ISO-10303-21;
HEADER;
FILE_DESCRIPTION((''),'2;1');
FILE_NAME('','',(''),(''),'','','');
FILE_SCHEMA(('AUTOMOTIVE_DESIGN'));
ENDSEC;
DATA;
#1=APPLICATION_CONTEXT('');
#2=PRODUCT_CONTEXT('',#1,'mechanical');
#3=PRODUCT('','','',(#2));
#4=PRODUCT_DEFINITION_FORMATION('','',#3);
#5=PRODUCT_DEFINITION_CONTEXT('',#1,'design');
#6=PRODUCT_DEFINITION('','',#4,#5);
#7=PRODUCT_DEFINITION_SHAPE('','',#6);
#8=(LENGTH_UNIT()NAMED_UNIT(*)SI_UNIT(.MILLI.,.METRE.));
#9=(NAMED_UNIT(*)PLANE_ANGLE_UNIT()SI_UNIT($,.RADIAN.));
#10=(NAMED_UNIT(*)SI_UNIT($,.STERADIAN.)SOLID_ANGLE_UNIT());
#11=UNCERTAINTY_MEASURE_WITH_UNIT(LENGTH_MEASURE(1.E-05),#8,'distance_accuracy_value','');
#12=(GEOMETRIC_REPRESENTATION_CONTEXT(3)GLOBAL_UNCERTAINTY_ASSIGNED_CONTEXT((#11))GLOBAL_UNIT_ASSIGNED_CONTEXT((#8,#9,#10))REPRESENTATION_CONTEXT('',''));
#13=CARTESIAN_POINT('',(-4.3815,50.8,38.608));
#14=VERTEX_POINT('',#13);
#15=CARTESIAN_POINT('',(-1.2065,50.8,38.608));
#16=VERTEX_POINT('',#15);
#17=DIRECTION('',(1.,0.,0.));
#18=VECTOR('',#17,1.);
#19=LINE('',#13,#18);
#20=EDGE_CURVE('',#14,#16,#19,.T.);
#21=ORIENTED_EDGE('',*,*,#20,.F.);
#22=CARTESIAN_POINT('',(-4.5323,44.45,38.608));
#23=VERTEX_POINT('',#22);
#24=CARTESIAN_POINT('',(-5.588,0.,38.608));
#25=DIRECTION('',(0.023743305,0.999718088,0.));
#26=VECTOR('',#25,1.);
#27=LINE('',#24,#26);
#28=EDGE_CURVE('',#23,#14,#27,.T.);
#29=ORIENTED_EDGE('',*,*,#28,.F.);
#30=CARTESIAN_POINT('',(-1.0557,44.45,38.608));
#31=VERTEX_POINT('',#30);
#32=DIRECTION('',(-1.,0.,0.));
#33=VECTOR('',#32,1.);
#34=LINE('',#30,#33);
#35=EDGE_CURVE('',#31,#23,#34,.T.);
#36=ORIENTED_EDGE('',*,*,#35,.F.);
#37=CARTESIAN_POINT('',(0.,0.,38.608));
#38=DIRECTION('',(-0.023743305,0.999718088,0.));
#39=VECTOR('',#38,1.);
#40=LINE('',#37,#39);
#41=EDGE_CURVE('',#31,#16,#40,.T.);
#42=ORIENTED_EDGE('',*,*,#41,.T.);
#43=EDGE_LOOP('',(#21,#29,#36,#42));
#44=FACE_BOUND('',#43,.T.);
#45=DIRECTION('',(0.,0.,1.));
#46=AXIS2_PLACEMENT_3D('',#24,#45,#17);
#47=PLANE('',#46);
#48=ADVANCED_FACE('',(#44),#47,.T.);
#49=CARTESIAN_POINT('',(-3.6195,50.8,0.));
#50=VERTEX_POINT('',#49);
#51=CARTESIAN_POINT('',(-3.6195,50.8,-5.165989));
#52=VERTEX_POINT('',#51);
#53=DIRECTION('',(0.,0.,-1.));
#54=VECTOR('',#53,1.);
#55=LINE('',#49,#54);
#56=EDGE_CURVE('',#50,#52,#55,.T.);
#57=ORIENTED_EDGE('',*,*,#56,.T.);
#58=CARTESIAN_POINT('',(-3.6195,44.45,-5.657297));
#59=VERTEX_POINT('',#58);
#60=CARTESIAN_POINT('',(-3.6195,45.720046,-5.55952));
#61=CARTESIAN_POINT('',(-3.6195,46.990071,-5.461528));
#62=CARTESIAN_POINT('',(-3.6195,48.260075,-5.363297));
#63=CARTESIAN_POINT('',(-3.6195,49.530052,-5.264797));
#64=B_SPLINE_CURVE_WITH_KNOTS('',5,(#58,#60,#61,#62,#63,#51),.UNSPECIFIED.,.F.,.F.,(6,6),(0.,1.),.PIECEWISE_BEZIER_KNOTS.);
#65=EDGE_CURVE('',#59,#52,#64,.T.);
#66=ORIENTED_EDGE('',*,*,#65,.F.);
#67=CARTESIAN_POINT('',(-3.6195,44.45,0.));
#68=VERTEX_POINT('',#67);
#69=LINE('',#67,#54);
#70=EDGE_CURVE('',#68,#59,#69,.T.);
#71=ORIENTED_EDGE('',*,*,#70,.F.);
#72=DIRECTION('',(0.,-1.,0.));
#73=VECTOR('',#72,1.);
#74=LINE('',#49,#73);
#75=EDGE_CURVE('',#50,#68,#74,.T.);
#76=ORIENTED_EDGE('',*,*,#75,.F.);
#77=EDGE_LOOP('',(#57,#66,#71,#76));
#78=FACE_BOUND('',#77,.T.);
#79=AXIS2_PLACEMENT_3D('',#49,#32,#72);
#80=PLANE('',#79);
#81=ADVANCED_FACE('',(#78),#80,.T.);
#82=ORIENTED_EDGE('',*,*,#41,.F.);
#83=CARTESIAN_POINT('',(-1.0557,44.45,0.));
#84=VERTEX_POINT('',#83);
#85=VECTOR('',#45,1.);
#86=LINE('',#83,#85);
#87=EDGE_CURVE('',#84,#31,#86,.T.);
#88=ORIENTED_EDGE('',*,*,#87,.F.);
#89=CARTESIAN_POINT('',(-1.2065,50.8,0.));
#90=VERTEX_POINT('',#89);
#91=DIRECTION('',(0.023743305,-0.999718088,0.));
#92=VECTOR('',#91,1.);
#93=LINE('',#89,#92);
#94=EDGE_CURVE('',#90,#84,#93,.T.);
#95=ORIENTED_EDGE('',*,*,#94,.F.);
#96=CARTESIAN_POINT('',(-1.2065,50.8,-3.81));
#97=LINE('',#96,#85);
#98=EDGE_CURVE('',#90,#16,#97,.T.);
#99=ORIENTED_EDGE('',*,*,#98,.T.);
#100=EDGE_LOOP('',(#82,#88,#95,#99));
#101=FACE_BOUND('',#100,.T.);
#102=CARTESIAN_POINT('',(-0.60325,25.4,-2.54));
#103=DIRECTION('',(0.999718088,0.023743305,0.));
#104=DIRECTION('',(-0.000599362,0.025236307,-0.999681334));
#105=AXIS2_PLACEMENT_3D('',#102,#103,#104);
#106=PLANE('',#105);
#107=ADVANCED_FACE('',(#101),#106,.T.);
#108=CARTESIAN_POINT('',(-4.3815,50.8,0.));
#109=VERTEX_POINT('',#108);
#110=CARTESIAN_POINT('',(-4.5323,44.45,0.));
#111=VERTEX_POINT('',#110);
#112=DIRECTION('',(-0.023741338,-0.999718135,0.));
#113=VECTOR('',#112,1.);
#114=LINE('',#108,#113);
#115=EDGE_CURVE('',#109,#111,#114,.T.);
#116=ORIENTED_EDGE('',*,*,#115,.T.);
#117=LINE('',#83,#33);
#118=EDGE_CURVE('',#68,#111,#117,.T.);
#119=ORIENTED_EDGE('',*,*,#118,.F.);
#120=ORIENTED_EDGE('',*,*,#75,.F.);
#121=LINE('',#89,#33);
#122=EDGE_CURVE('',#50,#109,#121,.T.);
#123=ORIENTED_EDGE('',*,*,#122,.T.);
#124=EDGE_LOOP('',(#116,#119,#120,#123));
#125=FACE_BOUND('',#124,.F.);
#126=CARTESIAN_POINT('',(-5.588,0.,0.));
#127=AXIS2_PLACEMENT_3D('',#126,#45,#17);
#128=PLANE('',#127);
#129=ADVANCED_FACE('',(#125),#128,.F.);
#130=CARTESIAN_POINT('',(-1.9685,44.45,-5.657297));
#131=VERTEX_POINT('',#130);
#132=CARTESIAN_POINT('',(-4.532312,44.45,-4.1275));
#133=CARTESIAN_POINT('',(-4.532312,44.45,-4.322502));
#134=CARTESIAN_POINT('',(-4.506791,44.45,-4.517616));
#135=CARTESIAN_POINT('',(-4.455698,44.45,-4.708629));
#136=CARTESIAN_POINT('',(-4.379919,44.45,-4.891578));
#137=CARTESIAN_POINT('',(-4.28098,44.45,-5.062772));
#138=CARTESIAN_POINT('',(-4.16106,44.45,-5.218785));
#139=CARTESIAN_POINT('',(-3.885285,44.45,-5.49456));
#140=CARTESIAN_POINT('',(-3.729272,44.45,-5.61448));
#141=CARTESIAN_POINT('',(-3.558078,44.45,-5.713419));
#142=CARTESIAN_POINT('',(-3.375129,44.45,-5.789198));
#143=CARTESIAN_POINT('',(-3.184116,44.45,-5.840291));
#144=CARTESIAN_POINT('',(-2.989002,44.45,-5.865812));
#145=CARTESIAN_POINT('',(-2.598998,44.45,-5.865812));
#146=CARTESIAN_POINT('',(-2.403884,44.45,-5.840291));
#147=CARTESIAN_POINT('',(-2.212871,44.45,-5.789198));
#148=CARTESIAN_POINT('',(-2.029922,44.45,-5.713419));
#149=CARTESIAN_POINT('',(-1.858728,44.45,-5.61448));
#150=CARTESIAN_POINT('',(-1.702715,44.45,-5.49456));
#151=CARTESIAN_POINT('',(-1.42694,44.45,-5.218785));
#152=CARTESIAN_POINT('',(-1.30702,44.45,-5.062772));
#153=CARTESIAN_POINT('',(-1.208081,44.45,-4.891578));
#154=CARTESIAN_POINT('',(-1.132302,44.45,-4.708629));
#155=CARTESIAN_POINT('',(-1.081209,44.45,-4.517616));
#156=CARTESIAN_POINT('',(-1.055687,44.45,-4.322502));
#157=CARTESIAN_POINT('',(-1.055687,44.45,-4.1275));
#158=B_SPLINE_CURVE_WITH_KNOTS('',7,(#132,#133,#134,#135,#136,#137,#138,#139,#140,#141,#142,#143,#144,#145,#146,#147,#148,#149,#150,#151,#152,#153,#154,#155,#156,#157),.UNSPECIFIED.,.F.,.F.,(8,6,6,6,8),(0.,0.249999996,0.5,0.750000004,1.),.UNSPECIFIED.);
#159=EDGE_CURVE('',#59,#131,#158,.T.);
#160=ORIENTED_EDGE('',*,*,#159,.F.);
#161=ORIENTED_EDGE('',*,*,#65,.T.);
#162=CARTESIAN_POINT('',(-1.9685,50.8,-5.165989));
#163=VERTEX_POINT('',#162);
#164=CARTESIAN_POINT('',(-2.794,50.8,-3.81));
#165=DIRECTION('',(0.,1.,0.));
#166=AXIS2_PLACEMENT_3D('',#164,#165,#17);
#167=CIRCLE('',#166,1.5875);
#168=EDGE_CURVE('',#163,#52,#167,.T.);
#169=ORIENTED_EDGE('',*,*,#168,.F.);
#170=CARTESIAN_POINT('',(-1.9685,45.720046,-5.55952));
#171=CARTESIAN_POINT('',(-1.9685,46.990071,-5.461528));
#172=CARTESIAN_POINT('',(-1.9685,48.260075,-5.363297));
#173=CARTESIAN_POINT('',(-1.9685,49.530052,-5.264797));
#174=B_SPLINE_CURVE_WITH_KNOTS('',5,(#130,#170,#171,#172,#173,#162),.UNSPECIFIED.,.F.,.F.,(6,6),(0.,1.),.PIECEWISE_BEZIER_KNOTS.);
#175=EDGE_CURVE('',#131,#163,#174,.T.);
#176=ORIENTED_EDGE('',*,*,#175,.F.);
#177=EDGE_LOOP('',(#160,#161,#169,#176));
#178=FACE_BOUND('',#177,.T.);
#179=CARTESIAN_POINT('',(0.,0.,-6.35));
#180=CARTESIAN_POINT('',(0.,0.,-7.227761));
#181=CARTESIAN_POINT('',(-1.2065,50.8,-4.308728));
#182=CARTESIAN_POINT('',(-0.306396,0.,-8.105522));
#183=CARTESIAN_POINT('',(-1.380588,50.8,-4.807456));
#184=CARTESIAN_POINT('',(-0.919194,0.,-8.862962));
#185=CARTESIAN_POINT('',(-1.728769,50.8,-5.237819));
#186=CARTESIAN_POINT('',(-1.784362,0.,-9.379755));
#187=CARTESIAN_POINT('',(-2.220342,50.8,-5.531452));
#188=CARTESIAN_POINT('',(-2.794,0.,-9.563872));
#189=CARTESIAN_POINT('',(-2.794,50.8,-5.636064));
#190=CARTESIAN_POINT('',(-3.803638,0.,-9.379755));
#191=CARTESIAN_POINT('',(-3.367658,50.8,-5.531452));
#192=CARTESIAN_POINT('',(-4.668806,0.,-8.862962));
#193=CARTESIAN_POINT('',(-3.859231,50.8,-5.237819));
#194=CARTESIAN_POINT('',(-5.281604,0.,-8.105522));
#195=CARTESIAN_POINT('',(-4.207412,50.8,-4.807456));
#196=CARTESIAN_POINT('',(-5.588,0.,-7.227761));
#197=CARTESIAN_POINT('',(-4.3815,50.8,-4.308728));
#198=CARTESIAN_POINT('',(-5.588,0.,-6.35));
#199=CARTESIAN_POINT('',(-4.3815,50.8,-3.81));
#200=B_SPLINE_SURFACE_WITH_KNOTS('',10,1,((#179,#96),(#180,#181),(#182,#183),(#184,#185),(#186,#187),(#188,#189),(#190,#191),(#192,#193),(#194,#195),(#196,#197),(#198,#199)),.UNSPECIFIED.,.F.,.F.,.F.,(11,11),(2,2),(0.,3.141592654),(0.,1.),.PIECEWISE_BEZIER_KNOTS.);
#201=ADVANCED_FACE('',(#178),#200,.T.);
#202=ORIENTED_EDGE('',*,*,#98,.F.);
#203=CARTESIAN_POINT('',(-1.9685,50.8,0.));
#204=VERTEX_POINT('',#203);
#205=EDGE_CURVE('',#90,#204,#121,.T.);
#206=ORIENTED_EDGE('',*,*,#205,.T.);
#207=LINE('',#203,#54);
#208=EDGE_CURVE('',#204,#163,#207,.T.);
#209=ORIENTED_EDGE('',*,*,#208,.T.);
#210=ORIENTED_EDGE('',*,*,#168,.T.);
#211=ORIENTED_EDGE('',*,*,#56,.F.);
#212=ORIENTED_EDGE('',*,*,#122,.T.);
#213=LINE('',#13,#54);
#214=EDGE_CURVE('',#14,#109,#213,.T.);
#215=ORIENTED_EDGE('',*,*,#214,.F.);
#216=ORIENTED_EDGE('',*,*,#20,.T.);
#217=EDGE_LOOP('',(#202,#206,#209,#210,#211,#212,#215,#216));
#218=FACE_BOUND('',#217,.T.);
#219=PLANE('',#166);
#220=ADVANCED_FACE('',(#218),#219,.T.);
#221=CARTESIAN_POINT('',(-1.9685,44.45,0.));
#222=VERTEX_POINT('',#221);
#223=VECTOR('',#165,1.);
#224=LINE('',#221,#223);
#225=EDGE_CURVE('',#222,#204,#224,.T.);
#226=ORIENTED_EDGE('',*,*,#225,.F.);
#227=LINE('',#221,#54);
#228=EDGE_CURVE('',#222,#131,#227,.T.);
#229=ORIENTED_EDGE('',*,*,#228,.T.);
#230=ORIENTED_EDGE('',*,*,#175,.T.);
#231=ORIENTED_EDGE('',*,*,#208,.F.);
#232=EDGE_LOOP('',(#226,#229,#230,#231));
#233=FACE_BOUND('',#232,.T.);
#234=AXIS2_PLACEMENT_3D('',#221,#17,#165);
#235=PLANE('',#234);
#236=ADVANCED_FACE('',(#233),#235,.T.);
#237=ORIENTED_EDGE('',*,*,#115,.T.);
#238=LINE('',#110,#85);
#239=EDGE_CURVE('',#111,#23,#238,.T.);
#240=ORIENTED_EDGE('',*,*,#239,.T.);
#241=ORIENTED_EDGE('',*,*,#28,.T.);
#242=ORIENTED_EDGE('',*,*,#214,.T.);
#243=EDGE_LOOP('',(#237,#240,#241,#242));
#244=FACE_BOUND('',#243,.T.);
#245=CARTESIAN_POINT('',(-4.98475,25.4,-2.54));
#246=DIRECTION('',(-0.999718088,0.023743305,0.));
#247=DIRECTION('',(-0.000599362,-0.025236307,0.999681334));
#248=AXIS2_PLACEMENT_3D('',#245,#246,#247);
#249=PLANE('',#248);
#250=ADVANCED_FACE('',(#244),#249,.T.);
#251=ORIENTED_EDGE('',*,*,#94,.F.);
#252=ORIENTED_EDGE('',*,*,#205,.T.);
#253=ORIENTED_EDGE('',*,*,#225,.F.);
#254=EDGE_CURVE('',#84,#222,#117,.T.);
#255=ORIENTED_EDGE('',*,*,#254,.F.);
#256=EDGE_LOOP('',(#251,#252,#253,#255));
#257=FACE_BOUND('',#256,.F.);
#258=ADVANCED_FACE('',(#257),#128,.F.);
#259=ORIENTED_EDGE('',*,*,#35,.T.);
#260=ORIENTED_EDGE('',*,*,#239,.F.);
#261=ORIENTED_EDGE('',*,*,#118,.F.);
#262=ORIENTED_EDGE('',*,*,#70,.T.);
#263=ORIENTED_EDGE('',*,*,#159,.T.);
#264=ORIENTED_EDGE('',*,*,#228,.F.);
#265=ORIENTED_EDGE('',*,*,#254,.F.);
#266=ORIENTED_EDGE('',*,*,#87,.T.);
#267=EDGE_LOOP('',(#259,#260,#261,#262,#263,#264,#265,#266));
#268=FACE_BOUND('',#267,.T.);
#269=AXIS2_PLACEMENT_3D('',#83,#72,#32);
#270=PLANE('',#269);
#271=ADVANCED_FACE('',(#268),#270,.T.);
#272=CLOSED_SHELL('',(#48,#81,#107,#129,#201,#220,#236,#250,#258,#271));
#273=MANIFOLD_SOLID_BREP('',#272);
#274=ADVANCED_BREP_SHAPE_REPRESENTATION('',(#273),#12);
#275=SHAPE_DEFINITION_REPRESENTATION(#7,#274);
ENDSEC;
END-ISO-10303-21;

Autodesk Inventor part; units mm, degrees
ref_plane "YZ Plane" through (0, 0, 0) normal (1, 0, 0) x (0, 1, 0)
ref_plane "XY Plane" through (0, 0, 0) normal (0, 0, 1) x (1, 0, 0)
sketch "Sketch6" plane through (0, 0, 0) normal (0, 1, 0) x (-1, 0, 0)
  line L0 (0, 0) -> (5.588, 0)
  line L1 (5.588, 0) -> (5.588, -6.35)
  line L2 (5.588, -6.35) -> (0, -6.35)
  line L3 (0, -6.35) -> (0, 0)
  arc A0 (0, -6.35) -> (5.588, -6.35) centre (2.794, -6.35) ccw
  dimension "d25" = 5.588
  dimension "d26" = 6.35
ref_plane "Work Plane1" through (0, 50.8, 0) normal (0, 1, 0) x (-1, 0, 0)
sketch "Sketch8" plane through (0, 50.8, 0) normal (0, 1, 0) x (-1, 0, 0)
  line L0 (4.3815, 0) -> (1.2065, 0)
  line L1 (1.2065, 0) -> (1.2065, -3.81)
  line L2 (1.2065, -3.81) -> (4.3815, -3.81)
  line L3 (4.3815, -3.81) -> (4.3815, 0)
  arc A0 (1.2065, -3.81) -> (4.3815, -3.81) centre (2.794, -3.81) ccw
  point P0 (0, 0)
  dimension "d27" = 3.175
  dimension "d28" = 3.81
  dimension "d49" = 1.2065
loft "Loft1" add profiles "Sketch6", "Sketch8"
sketch "Sketch9" plane through (-5.588, 0, 0) normal (0, 0, 1) x (1, 0, 0)
  line L0 (0, 0) -> (5.588, 0) projected
  line L1 (5.588, 0) -> (4.3815, 50.8) projected
  line L2 (1.2065, 50.8) -> (4.3815, 50.8) projected
  line L3 (0, 0) -> (1.2065, 50.8) projected
  line L4 (4.3815, 50.8) -> (5.588, 0) projected
  line L5 (4.5323, 44.45) -> (1.0557, 44.45)
  line L6 (0, 0) -> (1.2065, 50.8) projected
  dimension "d34" = 6.35
extrude "Extrusion5" add sketch "Sketch9" along normal blind 38.608 contours L3 L2 L1 L5
sketch "Sketch12" plane through (-2.794, 0, -6.35) normal (0, -1, 0) x (1, 0, 0)
  circle A0 centre (0, 1.9685) radius 1.27
  arc A1 (-2.794, 0) -> (2.794, 0) centre (0, 0) ccw projected
  line L0 (0, -2.794) -> (0, 1.9685)
  point P0 (2.794, 6.35)
  dimension "d44" = 2.54
  dimension "d46" = 4.7625
extrude "Extrusion8" cut sketch "Sketch12" against normal blind 10.16
sketch "Sketch13" plane through (-5.588, 0, 0) normal (0, 0, 1) x (1, 0, 0)
  line L0 (4.3815, 50.8) -> (1.2065, 50.8) projected
  line L1 (1.2065, 50.8) -> (4.3815, 50.8) projected
  line L2 (1.0557, 44.45) -> (4.5323, 44.45) projected
  line L3 (3.6195, 50.8) -> (1.9685, 50.8)
  line L4 (1.9685, 50.8) -> (1.9685, 44.45)
  line L5 (1.9685, 44.45) -> (3.6195, 44.45)
  line L6 (3.6195, 44.45) -> (3.6195, 50.8)
  line L7 (3.6195, 50.8) -> (4.3815, 50.8) construction
  line L8 (0, 0) -> (1.2065, 50.8) construction
  line L9 (1.9685, 50.8) -> (1.2065, 50.8) construction
  line L10 (10.7022, 53.5114) -> (-2.6174, 53.5114)
  line L11 (-2.6174, 53.5114) -> (-2.6174, -3.5015)
  line L12 (-2.6174, -3.5015) -> (10.7022, -3.5015)
  line L13 (10.7022, -3.5015) -> (10.7022, 53.5114)
  line L14 (1.9685, 50.8) -> (1.2065, 50.8)
  line L15 (1.2065, 50.8) -> (1.0557, 44.45)
  line L16 (1.9685, 44.45) -> (1.0557, 44.45)
  line L17 (4.3815, 50.8) -> (5.588, 0) projected
  line L18 (3.6195, 44.45) -> (4.5323, 44.45)
  line L19 (4.5323, 44.45) -> (4.3815, 50.8)
  line L20 (4.3815, 50.8) -> (3.6195, 50.8)
  dimension "d50" = 1.651
extrude "Extrusion11" cut sketch "Sketch13" against normal through all contours L17 L2 L6 L0 | L4 L2 L15 L0
sketch "Sketch15" plane through (-5.588, 0, 0) normal (0, 0, 1) x (1, 0, 0)
  line L0 (8.5653, 44.45) -> (-2.8373, 44.45)
  line L1 (-2.8373, 44.45) -> (-2.8373, 0)
  line L2 (-2.8373, 0) -> (8.5653, 0)
  line L3 (8.5653, 0) -> (8.5653, 44.45)
  point P0 (5.588, 0)
extrude "Extrusion12" cut sketch "Sketch15" against normal through all
properties part number "RudderStabilizingFins_Print2"
